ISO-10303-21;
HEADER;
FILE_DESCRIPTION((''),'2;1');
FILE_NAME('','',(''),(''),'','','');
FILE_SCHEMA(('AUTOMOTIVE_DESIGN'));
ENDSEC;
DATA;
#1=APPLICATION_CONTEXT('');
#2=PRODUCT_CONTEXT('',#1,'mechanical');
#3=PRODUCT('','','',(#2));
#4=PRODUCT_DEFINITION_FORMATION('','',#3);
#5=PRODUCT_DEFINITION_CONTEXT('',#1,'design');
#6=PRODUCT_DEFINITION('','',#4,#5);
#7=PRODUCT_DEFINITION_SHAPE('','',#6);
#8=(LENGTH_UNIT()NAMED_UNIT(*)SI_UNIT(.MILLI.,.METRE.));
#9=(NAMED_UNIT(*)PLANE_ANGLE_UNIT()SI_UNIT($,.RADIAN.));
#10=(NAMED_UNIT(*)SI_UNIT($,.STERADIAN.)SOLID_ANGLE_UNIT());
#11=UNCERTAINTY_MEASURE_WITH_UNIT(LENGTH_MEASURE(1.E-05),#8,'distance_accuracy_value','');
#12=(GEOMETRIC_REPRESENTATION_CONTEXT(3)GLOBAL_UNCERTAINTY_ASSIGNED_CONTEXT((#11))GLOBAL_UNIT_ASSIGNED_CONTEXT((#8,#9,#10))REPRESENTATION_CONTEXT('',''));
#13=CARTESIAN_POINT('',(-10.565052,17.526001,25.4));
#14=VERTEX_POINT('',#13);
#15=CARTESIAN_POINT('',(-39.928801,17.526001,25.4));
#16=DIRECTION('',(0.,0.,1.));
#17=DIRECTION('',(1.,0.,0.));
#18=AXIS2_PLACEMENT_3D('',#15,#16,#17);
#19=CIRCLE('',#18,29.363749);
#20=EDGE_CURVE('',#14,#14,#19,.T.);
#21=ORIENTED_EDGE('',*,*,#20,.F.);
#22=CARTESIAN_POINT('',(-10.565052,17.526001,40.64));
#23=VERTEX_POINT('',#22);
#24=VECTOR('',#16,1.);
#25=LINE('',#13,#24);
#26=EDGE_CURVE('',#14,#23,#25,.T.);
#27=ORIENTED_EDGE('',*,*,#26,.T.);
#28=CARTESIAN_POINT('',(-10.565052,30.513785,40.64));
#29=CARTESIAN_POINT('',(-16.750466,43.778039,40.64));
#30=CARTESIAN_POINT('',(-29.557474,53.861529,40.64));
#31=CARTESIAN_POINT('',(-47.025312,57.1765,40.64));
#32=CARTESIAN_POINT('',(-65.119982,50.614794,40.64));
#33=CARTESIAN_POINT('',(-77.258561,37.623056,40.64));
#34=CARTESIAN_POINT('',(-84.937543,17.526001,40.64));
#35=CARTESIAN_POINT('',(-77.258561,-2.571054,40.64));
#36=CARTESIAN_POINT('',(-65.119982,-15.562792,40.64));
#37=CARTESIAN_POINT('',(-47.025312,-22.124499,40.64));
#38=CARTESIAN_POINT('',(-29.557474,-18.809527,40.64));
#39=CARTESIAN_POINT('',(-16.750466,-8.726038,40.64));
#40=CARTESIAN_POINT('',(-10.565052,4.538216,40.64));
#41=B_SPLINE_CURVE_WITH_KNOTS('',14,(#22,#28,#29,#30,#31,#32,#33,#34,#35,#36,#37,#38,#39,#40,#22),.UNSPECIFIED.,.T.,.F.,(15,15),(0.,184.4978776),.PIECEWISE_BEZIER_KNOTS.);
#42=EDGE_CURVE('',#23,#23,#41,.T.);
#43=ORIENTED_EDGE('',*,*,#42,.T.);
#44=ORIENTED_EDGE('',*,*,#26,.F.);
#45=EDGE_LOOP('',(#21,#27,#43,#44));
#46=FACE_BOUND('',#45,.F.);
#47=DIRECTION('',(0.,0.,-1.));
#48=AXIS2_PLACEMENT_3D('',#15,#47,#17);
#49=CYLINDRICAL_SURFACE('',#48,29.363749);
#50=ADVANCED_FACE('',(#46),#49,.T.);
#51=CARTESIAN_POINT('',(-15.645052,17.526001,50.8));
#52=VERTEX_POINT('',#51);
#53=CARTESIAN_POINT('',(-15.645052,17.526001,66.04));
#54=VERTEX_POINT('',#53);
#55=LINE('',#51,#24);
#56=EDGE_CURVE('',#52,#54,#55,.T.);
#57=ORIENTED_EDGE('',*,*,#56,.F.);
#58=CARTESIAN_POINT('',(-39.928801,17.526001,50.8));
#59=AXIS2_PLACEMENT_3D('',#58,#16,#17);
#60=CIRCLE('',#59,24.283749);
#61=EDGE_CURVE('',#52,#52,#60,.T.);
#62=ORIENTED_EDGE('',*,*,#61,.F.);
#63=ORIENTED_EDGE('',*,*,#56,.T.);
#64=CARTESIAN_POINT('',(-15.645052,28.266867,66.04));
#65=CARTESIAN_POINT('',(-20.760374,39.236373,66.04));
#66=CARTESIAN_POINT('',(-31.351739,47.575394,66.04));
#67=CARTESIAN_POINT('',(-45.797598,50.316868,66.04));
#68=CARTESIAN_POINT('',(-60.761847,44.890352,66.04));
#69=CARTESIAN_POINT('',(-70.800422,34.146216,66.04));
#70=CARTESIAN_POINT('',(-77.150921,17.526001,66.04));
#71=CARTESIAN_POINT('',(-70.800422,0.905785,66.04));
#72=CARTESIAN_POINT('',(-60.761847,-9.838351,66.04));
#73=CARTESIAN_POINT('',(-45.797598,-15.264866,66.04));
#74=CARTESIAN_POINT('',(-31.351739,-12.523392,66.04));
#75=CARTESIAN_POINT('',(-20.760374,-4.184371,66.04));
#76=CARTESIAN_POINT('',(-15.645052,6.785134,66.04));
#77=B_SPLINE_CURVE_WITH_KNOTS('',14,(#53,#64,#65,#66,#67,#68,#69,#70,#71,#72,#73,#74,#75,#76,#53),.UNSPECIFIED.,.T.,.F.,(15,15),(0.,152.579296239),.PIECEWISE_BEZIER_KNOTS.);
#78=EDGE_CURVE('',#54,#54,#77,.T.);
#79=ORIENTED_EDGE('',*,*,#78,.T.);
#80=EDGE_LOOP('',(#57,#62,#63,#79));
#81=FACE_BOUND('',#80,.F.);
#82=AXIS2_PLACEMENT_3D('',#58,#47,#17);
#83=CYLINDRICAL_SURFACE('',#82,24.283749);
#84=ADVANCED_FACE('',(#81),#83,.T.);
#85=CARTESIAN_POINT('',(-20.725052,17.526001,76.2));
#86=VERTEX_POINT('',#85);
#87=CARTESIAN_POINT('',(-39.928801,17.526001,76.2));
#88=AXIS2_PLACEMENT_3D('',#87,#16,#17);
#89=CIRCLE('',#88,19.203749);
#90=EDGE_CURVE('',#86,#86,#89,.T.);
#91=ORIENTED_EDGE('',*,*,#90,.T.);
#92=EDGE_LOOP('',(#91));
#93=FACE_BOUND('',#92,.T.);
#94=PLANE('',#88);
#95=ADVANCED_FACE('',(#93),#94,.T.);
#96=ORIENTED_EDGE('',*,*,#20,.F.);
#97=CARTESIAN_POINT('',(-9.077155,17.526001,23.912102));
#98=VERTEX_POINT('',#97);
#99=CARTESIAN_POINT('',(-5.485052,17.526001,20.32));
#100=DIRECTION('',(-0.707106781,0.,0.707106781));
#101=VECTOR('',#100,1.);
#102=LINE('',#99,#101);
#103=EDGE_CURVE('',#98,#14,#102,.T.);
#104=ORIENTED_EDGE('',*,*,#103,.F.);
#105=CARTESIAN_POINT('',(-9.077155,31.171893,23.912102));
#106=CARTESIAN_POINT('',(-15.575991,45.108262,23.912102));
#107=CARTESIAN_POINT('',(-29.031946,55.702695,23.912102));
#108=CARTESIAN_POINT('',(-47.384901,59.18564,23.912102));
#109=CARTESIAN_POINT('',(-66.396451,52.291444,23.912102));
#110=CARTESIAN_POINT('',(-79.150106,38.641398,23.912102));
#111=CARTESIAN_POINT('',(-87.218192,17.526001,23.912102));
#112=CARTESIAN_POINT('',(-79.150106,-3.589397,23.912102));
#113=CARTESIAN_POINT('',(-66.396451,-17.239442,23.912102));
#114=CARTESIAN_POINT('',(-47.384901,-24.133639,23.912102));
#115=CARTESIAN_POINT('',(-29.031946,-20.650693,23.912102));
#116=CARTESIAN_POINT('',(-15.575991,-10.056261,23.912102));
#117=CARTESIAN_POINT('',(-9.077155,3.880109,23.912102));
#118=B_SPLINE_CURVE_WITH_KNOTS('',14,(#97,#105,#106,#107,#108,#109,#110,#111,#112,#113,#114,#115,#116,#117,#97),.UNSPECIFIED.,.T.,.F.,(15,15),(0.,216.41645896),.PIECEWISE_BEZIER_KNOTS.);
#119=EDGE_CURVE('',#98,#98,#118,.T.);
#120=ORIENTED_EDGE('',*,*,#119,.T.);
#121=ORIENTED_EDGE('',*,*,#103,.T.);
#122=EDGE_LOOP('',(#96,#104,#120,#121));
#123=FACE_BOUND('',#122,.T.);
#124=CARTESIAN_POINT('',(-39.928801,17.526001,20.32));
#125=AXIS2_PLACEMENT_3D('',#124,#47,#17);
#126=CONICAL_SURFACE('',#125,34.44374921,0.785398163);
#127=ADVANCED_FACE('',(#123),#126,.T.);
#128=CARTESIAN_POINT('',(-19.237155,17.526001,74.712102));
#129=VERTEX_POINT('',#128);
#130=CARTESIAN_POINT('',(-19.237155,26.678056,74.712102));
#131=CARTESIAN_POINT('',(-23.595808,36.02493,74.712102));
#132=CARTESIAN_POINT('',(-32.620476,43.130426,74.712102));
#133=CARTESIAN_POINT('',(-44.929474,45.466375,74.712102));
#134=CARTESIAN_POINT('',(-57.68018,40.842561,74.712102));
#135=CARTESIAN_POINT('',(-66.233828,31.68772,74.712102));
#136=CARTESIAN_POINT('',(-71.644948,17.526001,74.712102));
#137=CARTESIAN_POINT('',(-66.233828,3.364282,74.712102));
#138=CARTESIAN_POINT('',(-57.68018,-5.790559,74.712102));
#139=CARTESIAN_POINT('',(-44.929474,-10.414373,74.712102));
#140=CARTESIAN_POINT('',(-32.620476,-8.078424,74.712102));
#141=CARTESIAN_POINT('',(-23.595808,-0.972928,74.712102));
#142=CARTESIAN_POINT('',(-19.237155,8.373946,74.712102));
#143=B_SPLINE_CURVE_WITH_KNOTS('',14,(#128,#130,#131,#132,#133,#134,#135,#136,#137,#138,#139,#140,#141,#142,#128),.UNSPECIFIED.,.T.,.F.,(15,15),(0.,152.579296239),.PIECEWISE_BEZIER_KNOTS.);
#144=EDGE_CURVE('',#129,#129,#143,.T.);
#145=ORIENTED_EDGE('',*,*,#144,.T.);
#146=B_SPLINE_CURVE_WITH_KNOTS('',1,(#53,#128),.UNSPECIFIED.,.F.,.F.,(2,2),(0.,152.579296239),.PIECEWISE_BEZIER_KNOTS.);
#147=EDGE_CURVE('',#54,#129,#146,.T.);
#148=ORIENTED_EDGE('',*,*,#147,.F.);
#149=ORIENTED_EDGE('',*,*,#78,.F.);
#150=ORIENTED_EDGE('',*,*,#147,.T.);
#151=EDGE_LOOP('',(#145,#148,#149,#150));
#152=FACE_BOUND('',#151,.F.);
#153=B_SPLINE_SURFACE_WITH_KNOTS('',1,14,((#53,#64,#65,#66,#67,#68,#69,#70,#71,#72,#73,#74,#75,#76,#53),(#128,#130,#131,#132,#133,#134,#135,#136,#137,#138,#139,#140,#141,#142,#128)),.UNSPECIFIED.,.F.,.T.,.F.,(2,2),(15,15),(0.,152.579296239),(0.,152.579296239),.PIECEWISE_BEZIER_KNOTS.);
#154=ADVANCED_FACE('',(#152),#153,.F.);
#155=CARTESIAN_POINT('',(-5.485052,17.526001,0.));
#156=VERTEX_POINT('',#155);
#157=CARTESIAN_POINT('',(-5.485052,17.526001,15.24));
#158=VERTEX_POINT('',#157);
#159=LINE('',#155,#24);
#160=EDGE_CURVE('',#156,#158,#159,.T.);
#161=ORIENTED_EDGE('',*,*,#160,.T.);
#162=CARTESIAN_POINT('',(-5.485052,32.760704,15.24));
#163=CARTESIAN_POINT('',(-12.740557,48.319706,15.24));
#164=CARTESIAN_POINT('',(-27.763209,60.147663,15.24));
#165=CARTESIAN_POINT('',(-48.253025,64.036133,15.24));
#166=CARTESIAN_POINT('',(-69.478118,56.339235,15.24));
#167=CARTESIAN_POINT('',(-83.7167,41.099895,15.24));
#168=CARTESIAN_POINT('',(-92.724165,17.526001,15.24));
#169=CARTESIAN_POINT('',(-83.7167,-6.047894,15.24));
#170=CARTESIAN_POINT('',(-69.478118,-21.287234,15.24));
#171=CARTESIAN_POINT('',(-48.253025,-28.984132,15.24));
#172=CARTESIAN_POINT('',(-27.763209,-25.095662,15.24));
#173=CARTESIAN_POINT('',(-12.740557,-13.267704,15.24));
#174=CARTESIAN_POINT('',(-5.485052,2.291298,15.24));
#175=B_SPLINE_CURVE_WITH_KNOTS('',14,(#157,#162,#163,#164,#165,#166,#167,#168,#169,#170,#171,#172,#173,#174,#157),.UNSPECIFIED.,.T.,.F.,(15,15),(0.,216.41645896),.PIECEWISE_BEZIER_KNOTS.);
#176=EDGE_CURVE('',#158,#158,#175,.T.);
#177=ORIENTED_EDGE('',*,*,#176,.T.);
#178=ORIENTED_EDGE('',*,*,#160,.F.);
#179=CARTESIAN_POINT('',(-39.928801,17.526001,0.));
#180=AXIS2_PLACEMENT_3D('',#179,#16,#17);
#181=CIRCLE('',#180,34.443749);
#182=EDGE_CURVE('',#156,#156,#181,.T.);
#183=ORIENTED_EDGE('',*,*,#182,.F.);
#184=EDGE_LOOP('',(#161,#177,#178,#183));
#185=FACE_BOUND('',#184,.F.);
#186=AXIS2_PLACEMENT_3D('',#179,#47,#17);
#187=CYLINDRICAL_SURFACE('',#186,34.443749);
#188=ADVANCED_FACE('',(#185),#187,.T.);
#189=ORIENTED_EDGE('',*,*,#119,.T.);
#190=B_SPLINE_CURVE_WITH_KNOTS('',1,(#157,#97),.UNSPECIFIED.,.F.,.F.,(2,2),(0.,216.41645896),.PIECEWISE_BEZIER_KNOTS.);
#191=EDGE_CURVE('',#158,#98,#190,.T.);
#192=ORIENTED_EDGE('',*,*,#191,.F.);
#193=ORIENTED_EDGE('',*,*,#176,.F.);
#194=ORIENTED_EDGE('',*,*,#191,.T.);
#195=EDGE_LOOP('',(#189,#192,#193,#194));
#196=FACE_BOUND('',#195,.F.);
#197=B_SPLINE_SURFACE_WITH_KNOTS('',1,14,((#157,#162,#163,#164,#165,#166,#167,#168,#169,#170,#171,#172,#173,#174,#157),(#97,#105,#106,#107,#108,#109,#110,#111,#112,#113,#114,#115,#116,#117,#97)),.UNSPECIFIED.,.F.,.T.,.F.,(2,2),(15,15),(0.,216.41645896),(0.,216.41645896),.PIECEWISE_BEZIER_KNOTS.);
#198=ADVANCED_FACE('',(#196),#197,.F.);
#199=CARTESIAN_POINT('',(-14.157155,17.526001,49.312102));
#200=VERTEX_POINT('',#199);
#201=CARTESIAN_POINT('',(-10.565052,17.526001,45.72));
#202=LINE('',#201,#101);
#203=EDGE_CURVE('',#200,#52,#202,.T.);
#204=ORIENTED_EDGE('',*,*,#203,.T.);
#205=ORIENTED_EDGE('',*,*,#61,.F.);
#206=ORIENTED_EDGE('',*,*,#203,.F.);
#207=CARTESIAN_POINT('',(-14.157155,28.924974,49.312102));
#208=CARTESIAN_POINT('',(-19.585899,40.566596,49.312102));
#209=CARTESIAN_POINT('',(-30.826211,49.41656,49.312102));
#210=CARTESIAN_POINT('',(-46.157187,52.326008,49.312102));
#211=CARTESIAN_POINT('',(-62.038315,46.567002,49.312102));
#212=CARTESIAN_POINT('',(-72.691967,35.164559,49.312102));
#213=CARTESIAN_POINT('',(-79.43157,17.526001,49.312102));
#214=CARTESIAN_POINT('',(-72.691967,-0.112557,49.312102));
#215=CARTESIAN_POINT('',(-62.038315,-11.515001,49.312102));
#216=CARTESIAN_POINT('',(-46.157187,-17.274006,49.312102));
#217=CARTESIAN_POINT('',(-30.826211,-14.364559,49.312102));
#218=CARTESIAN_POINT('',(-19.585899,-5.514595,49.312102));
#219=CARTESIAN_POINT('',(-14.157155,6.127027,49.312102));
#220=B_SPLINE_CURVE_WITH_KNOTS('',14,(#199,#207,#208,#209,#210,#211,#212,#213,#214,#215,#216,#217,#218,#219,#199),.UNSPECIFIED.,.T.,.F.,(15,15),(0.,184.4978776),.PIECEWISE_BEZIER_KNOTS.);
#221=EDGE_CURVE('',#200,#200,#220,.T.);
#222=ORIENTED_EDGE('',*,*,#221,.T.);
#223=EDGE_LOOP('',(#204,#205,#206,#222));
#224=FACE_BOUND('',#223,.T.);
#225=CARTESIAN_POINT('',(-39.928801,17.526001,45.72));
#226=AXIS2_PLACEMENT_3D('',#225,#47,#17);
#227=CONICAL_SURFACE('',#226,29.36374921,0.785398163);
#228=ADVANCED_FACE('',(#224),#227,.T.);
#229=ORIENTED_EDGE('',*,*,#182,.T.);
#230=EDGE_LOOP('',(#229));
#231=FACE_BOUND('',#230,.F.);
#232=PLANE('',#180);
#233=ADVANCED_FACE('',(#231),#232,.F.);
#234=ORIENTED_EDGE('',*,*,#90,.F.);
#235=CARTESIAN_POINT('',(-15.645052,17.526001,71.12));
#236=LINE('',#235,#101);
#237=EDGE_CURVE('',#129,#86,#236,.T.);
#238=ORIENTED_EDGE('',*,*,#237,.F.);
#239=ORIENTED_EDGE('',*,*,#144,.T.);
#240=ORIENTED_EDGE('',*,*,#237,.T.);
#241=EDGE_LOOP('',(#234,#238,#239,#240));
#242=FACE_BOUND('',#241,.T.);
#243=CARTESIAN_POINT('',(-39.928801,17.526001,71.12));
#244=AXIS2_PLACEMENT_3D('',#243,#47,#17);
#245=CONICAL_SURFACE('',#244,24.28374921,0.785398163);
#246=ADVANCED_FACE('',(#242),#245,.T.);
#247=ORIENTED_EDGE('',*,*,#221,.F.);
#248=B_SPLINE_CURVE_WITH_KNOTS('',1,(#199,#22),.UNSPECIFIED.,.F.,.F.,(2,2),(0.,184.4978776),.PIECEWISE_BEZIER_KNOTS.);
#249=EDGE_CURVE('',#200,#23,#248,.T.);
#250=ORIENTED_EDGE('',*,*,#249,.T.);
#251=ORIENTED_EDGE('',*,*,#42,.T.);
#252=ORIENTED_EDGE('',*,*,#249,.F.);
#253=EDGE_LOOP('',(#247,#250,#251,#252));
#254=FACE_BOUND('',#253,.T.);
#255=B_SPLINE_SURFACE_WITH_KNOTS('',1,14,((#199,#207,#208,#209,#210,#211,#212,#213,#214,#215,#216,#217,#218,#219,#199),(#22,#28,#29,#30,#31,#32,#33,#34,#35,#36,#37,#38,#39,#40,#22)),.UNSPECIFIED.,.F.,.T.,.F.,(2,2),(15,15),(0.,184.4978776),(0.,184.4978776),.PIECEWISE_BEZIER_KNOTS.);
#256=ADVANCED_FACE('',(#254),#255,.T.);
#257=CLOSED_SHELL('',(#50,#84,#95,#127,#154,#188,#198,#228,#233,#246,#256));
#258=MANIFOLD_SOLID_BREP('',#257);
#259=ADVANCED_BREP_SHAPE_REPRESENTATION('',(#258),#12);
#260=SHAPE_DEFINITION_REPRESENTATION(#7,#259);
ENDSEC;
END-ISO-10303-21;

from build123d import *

# Parameters (mm, degrees)
F0_R     = 34.44374921
F1_DEPTH = 25.4
F2_SIZE  = 5.08
F3_SIZE  = 5.08
F4_DEPTH = 25.4
F5_SIZE  = 5.08
F6_DEPTH = 25.4
F7_SIZE  = 5.08
F8_SIZE  = 5.08


# Not quite as in the source:
# - two fillets or chamfers of one size are made in one step


with BuildPart() as f1:
    # F0 (on Top) → F1 (new body)
    with BuildSketch(Plane.XY):
        with Locations((-39.9288013577, 17.5260007381)):
            Circle(F0_R)
    extrude(amount=F1_DEPTH)

    # F2
    f2_edges = [f1.edges().sort_by_distance(p)[0] for p in [
        (-74.372551, 17.526001, 25.4),
    ]]
    chamfer(f2_edges, length=F2_SIZE)

    # F3
    f3_edges = [f1.edges().sort_by_distance(p)[0] for p in [
        (-74.372551, 17.526001, 20.32),
    ]]
    chamfer(f3_edges, length=F3_SIZE)

    # F4 (add): a face of the model
    f4_faces = [f1.faces().sort_by_distance(p)[0] for p in [
        (-39.9288013577, 17.5260007381, 25.4),
    ]]
    extrude(f4_faces, amount=F4_DEPTH)

    # F5
    f5_edges = [f1.edges().sort_by_distance(p)[0] for p in [
        (-69.292551, 17.526001, 50.8),
    ]]
    chamfer(f5_edges, length=F5_SIZE)

    # F6 (add): a face of the model
    f6_faces = [f1.faces().sort_by_distance(p)[0] for p in [
        (-39.9288013577, 17.5260007381, 50.8),
    ]]
    extrude(f6_faces, amount=F6_DEPTH)

    # F7
    f7_edges = [f1.edges().sort_by_distance(p)[0] for p in [
        (-69.292551, 17.526001, 45.72),
        (-64.212551, 17.526001, 76.2),
    ]]
    chamfer(f7_edges, length=F7_SIZE)

    # F8
    f8_edges = [f1.edges().sort_by_distance(p)[0] for p in [
        (-64.212551, 17.526001, 71.12),
    ]]
    chamfer(f8_edges, length=F8_SIZE)


solid = f1.part
